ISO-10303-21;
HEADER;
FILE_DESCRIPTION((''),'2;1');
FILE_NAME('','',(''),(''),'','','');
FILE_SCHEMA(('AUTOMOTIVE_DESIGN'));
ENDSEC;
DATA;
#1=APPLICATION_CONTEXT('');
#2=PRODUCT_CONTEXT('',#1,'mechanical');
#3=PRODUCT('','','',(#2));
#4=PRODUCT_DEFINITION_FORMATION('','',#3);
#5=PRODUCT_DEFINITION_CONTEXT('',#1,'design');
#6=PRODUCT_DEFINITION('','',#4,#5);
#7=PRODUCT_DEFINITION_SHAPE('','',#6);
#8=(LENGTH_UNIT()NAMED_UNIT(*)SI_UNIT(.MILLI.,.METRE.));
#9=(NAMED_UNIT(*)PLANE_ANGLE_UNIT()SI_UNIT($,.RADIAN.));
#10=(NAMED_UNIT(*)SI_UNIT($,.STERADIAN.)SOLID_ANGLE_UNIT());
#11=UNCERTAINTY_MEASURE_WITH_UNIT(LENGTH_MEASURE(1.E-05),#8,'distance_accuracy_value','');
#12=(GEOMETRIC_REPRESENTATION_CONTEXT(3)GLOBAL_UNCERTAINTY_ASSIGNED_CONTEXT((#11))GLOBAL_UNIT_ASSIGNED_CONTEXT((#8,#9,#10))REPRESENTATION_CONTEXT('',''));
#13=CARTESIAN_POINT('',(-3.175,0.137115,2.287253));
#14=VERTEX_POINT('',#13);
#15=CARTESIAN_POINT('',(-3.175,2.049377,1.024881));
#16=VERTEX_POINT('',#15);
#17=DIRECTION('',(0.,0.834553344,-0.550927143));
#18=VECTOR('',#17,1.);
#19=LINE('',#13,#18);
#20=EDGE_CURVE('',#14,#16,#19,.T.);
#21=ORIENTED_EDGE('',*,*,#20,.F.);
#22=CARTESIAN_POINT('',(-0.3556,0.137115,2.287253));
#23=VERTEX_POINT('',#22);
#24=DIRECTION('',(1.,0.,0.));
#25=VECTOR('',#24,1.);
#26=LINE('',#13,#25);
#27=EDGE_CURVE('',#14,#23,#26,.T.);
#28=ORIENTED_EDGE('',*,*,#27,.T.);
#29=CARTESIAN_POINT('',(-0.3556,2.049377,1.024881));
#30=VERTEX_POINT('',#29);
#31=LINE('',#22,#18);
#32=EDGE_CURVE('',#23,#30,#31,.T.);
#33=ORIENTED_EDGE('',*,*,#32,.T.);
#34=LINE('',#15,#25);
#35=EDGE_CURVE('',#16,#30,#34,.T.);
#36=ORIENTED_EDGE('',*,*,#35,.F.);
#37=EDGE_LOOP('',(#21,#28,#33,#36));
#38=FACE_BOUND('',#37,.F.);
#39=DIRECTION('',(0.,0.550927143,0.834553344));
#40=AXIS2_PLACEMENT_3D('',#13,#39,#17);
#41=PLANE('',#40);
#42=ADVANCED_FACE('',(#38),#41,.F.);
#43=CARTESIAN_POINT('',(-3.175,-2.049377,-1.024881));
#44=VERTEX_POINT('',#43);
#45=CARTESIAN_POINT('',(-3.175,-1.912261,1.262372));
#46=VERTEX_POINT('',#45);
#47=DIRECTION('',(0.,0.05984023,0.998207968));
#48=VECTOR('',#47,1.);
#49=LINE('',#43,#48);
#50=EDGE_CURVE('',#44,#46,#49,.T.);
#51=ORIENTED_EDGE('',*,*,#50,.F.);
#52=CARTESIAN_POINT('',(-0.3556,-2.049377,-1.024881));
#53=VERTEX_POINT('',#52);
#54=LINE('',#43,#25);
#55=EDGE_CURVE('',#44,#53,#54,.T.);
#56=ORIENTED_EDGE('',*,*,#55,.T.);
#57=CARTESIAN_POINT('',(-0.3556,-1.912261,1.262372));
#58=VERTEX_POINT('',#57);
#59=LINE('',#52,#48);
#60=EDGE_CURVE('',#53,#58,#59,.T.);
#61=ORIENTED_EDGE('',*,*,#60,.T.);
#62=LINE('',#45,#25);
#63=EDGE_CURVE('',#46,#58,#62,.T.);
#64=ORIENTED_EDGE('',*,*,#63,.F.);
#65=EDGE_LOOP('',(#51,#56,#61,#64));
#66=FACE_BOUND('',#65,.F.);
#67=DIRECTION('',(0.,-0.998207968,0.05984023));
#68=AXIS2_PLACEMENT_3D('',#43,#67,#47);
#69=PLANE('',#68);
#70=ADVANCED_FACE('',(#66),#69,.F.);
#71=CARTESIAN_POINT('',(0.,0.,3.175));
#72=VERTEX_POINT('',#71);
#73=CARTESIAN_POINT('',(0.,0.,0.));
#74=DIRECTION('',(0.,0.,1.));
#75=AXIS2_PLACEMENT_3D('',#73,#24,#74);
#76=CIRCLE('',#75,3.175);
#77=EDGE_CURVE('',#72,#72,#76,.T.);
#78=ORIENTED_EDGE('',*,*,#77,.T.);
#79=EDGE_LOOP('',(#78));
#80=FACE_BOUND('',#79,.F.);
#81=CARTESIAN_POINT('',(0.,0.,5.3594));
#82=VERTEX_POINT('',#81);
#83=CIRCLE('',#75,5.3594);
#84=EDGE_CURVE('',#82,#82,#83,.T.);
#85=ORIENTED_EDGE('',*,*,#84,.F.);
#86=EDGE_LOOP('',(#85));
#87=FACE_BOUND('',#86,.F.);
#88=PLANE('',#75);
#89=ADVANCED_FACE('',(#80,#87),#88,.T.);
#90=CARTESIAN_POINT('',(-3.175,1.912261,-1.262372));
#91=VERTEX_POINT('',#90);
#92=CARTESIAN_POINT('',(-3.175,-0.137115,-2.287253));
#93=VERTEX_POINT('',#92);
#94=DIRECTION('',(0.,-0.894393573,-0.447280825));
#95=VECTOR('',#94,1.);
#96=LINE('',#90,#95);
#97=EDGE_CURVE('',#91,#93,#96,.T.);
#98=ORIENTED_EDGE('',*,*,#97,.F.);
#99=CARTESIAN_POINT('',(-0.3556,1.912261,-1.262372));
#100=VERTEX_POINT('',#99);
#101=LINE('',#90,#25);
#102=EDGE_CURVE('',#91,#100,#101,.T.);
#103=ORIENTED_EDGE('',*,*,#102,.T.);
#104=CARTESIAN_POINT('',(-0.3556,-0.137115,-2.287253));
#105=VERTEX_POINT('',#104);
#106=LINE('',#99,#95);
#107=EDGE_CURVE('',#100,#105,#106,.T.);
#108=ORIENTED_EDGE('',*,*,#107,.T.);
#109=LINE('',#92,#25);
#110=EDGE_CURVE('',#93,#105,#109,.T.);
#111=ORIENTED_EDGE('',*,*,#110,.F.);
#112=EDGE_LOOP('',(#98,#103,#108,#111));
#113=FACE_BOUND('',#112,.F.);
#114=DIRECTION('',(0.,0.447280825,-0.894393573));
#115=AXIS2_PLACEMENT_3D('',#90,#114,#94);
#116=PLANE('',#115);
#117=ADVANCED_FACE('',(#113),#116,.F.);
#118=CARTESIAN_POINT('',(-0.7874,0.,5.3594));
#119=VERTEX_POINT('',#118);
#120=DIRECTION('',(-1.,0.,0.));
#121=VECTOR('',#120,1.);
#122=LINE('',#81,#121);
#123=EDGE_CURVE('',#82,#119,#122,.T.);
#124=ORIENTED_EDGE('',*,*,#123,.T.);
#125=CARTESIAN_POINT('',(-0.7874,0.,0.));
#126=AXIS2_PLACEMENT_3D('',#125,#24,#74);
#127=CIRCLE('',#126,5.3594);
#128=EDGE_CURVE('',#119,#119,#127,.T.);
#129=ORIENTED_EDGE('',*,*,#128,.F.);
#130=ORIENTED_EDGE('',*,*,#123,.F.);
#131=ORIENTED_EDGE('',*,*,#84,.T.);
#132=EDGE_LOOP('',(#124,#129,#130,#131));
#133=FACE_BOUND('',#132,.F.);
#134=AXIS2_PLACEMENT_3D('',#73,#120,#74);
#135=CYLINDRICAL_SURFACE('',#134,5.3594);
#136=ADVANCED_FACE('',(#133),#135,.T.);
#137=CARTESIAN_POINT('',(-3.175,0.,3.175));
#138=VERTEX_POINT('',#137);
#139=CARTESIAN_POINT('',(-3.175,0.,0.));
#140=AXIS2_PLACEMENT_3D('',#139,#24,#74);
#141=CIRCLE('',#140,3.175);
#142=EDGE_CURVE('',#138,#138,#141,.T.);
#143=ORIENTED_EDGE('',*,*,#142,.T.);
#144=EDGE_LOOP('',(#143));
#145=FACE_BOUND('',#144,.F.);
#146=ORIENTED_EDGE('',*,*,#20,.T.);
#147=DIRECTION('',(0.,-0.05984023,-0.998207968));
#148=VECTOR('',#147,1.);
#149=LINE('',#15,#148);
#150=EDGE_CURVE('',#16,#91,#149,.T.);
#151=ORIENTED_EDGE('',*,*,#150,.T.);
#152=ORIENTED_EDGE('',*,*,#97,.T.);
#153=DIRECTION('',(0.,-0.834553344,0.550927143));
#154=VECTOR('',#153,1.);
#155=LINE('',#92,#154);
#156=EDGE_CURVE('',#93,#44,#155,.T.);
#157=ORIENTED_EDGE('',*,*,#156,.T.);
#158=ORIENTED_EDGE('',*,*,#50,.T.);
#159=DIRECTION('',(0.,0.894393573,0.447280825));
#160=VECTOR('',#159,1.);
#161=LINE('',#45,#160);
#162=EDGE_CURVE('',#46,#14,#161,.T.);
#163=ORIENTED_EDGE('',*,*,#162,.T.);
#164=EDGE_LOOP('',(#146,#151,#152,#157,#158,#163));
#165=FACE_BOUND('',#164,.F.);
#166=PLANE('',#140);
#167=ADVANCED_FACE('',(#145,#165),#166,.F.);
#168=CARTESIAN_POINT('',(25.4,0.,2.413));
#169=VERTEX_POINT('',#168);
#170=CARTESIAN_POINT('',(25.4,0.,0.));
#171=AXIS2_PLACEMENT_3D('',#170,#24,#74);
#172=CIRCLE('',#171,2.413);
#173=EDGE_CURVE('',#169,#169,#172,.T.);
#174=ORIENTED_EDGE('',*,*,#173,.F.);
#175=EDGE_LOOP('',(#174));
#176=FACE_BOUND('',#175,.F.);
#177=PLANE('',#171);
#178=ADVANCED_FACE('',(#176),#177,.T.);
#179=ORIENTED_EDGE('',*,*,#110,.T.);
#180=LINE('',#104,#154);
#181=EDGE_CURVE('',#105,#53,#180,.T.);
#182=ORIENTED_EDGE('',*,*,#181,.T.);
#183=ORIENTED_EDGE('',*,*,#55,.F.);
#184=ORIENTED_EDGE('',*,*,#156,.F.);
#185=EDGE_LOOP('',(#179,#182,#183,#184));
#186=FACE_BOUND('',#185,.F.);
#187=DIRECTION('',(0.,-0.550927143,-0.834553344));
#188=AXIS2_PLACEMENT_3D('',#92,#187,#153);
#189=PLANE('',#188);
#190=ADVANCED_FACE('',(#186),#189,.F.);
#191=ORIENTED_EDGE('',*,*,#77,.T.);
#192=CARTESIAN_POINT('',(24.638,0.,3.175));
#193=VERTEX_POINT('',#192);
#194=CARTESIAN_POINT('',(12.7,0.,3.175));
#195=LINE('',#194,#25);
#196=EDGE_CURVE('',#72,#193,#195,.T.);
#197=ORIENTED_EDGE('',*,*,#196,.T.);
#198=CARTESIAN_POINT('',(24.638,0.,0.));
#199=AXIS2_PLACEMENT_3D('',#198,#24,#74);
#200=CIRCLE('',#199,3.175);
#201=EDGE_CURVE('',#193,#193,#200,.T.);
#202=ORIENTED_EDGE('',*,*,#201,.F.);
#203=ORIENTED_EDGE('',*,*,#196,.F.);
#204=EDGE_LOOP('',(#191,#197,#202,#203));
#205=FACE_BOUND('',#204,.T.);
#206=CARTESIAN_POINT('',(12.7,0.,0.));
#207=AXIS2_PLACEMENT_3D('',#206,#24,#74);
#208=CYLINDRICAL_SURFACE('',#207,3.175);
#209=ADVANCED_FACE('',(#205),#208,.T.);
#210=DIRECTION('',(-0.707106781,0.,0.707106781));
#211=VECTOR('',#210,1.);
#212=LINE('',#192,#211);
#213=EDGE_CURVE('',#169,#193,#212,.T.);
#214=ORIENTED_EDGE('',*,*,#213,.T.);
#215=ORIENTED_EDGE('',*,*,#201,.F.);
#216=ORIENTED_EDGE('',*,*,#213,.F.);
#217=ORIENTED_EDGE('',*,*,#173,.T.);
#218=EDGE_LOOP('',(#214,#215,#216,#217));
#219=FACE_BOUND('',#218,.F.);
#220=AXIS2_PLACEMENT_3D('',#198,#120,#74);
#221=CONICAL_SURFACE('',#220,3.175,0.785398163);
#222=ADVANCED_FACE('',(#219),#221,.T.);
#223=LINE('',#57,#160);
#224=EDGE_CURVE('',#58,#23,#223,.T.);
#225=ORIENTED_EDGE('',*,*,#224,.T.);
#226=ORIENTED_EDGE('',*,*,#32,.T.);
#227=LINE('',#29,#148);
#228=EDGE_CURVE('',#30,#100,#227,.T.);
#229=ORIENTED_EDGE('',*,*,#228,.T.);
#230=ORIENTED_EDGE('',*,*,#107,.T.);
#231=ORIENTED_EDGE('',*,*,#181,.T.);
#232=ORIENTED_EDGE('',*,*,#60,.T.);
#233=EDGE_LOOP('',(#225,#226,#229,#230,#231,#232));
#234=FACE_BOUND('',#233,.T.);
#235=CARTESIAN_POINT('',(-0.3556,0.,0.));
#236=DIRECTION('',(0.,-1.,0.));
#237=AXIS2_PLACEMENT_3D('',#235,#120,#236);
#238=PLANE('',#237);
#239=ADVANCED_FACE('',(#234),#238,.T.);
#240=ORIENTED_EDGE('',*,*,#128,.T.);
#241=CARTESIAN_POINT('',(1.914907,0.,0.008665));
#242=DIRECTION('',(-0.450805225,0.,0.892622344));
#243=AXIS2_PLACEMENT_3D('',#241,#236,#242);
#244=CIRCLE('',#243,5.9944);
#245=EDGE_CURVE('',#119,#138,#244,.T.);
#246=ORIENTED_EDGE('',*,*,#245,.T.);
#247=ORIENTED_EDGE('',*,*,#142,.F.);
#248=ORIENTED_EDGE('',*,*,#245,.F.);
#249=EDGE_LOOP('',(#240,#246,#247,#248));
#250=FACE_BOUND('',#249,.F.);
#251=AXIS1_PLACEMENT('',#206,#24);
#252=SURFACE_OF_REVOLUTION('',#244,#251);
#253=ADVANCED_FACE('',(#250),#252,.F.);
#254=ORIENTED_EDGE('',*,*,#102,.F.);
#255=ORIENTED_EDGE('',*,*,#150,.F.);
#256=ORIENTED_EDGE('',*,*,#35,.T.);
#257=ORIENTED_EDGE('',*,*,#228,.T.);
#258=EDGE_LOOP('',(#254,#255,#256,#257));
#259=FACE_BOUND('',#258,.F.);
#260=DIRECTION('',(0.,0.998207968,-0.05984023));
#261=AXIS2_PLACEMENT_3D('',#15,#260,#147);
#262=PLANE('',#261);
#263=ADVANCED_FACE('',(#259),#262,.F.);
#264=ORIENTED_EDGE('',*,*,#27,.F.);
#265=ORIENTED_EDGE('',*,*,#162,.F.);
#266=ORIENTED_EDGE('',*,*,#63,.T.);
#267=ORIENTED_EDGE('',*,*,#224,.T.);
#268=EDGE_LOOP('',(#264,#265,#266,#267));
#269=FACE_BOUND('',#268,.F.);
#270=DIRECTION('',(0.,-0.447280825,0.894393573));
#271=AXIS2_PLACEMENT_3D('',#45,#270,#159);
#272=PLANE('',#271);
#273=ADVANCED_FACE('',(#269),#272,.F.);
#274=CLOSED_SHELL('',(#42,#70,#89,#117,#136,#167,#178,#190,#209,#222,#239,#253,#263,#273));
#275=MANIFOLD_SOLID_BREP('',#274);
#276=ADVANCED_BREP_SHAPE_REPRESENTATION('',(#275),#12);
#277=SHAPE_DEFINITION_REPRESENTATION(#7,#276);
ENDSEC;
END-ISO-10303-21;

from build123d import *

# Parameters (mm, degrees)
F0_W     = 25.4
F0_H     = 3.175
F3_DEPTH = 2.8194
F4_SIZE2 = 0.762
F4_SIZE  = 0.762


# Not quite as in the source:
# - a feature names something its author has since deleted; it is built from what else it names


with BuildPart() as f1:
    # F0 (on Front) → F1 (revolve)
    with BuildSketch(Plane.XZ):
        with Locations((12.7, 1.5875)):
            Rectangle(F0_W, F0_H)
        with BuildLine():
            Line((-3.175, 0), (0, 0))
            Line((0, 0), (0, 3.175))
            Line((0, 3.175), (0, 5.3594))
            Line((0, 5.3594), (-0.7874, 5.3594))
            ThreePointArc((-0.7874, 5.3594), (-2.1313938593, 4.4313653811), (-3.175, 3.175))
            Line((-3.175, 3.175), (-3.175, 0))
        make_face()
    revolve(axis=Axis((12.7, 0, 0), (1, 0, 0)))

    # F2 (on face) → F3 (cut)
    with BuildSketch(Plane(origin=(-3.175, 0, 0), x_dir=(0, -1, 0), z_dir=(-1, 0, 0))):
        Polygon((1.9122612153, 1.2623718016), (-0.1371154416, 2.2872526919), (-2.0493766568, 1.0248808903), (-1.9122612153, -1.2623718016), (0.1371154416, -2.2872526919), (2.0493766568, -1.0248808903), align=None)
    extrude(amount=-F3_DEPTH, mode=Mode.SUBTRACT)

    # F4
    f4_edges = [f1.edges().sort_by_distance(p)[0] for p in [
        (25.4, 0, -3.175),
    ]]
    chamfer(f4_edges, length=F4_SIZE, length2=F4_SIZE2)


solid = f1.part
